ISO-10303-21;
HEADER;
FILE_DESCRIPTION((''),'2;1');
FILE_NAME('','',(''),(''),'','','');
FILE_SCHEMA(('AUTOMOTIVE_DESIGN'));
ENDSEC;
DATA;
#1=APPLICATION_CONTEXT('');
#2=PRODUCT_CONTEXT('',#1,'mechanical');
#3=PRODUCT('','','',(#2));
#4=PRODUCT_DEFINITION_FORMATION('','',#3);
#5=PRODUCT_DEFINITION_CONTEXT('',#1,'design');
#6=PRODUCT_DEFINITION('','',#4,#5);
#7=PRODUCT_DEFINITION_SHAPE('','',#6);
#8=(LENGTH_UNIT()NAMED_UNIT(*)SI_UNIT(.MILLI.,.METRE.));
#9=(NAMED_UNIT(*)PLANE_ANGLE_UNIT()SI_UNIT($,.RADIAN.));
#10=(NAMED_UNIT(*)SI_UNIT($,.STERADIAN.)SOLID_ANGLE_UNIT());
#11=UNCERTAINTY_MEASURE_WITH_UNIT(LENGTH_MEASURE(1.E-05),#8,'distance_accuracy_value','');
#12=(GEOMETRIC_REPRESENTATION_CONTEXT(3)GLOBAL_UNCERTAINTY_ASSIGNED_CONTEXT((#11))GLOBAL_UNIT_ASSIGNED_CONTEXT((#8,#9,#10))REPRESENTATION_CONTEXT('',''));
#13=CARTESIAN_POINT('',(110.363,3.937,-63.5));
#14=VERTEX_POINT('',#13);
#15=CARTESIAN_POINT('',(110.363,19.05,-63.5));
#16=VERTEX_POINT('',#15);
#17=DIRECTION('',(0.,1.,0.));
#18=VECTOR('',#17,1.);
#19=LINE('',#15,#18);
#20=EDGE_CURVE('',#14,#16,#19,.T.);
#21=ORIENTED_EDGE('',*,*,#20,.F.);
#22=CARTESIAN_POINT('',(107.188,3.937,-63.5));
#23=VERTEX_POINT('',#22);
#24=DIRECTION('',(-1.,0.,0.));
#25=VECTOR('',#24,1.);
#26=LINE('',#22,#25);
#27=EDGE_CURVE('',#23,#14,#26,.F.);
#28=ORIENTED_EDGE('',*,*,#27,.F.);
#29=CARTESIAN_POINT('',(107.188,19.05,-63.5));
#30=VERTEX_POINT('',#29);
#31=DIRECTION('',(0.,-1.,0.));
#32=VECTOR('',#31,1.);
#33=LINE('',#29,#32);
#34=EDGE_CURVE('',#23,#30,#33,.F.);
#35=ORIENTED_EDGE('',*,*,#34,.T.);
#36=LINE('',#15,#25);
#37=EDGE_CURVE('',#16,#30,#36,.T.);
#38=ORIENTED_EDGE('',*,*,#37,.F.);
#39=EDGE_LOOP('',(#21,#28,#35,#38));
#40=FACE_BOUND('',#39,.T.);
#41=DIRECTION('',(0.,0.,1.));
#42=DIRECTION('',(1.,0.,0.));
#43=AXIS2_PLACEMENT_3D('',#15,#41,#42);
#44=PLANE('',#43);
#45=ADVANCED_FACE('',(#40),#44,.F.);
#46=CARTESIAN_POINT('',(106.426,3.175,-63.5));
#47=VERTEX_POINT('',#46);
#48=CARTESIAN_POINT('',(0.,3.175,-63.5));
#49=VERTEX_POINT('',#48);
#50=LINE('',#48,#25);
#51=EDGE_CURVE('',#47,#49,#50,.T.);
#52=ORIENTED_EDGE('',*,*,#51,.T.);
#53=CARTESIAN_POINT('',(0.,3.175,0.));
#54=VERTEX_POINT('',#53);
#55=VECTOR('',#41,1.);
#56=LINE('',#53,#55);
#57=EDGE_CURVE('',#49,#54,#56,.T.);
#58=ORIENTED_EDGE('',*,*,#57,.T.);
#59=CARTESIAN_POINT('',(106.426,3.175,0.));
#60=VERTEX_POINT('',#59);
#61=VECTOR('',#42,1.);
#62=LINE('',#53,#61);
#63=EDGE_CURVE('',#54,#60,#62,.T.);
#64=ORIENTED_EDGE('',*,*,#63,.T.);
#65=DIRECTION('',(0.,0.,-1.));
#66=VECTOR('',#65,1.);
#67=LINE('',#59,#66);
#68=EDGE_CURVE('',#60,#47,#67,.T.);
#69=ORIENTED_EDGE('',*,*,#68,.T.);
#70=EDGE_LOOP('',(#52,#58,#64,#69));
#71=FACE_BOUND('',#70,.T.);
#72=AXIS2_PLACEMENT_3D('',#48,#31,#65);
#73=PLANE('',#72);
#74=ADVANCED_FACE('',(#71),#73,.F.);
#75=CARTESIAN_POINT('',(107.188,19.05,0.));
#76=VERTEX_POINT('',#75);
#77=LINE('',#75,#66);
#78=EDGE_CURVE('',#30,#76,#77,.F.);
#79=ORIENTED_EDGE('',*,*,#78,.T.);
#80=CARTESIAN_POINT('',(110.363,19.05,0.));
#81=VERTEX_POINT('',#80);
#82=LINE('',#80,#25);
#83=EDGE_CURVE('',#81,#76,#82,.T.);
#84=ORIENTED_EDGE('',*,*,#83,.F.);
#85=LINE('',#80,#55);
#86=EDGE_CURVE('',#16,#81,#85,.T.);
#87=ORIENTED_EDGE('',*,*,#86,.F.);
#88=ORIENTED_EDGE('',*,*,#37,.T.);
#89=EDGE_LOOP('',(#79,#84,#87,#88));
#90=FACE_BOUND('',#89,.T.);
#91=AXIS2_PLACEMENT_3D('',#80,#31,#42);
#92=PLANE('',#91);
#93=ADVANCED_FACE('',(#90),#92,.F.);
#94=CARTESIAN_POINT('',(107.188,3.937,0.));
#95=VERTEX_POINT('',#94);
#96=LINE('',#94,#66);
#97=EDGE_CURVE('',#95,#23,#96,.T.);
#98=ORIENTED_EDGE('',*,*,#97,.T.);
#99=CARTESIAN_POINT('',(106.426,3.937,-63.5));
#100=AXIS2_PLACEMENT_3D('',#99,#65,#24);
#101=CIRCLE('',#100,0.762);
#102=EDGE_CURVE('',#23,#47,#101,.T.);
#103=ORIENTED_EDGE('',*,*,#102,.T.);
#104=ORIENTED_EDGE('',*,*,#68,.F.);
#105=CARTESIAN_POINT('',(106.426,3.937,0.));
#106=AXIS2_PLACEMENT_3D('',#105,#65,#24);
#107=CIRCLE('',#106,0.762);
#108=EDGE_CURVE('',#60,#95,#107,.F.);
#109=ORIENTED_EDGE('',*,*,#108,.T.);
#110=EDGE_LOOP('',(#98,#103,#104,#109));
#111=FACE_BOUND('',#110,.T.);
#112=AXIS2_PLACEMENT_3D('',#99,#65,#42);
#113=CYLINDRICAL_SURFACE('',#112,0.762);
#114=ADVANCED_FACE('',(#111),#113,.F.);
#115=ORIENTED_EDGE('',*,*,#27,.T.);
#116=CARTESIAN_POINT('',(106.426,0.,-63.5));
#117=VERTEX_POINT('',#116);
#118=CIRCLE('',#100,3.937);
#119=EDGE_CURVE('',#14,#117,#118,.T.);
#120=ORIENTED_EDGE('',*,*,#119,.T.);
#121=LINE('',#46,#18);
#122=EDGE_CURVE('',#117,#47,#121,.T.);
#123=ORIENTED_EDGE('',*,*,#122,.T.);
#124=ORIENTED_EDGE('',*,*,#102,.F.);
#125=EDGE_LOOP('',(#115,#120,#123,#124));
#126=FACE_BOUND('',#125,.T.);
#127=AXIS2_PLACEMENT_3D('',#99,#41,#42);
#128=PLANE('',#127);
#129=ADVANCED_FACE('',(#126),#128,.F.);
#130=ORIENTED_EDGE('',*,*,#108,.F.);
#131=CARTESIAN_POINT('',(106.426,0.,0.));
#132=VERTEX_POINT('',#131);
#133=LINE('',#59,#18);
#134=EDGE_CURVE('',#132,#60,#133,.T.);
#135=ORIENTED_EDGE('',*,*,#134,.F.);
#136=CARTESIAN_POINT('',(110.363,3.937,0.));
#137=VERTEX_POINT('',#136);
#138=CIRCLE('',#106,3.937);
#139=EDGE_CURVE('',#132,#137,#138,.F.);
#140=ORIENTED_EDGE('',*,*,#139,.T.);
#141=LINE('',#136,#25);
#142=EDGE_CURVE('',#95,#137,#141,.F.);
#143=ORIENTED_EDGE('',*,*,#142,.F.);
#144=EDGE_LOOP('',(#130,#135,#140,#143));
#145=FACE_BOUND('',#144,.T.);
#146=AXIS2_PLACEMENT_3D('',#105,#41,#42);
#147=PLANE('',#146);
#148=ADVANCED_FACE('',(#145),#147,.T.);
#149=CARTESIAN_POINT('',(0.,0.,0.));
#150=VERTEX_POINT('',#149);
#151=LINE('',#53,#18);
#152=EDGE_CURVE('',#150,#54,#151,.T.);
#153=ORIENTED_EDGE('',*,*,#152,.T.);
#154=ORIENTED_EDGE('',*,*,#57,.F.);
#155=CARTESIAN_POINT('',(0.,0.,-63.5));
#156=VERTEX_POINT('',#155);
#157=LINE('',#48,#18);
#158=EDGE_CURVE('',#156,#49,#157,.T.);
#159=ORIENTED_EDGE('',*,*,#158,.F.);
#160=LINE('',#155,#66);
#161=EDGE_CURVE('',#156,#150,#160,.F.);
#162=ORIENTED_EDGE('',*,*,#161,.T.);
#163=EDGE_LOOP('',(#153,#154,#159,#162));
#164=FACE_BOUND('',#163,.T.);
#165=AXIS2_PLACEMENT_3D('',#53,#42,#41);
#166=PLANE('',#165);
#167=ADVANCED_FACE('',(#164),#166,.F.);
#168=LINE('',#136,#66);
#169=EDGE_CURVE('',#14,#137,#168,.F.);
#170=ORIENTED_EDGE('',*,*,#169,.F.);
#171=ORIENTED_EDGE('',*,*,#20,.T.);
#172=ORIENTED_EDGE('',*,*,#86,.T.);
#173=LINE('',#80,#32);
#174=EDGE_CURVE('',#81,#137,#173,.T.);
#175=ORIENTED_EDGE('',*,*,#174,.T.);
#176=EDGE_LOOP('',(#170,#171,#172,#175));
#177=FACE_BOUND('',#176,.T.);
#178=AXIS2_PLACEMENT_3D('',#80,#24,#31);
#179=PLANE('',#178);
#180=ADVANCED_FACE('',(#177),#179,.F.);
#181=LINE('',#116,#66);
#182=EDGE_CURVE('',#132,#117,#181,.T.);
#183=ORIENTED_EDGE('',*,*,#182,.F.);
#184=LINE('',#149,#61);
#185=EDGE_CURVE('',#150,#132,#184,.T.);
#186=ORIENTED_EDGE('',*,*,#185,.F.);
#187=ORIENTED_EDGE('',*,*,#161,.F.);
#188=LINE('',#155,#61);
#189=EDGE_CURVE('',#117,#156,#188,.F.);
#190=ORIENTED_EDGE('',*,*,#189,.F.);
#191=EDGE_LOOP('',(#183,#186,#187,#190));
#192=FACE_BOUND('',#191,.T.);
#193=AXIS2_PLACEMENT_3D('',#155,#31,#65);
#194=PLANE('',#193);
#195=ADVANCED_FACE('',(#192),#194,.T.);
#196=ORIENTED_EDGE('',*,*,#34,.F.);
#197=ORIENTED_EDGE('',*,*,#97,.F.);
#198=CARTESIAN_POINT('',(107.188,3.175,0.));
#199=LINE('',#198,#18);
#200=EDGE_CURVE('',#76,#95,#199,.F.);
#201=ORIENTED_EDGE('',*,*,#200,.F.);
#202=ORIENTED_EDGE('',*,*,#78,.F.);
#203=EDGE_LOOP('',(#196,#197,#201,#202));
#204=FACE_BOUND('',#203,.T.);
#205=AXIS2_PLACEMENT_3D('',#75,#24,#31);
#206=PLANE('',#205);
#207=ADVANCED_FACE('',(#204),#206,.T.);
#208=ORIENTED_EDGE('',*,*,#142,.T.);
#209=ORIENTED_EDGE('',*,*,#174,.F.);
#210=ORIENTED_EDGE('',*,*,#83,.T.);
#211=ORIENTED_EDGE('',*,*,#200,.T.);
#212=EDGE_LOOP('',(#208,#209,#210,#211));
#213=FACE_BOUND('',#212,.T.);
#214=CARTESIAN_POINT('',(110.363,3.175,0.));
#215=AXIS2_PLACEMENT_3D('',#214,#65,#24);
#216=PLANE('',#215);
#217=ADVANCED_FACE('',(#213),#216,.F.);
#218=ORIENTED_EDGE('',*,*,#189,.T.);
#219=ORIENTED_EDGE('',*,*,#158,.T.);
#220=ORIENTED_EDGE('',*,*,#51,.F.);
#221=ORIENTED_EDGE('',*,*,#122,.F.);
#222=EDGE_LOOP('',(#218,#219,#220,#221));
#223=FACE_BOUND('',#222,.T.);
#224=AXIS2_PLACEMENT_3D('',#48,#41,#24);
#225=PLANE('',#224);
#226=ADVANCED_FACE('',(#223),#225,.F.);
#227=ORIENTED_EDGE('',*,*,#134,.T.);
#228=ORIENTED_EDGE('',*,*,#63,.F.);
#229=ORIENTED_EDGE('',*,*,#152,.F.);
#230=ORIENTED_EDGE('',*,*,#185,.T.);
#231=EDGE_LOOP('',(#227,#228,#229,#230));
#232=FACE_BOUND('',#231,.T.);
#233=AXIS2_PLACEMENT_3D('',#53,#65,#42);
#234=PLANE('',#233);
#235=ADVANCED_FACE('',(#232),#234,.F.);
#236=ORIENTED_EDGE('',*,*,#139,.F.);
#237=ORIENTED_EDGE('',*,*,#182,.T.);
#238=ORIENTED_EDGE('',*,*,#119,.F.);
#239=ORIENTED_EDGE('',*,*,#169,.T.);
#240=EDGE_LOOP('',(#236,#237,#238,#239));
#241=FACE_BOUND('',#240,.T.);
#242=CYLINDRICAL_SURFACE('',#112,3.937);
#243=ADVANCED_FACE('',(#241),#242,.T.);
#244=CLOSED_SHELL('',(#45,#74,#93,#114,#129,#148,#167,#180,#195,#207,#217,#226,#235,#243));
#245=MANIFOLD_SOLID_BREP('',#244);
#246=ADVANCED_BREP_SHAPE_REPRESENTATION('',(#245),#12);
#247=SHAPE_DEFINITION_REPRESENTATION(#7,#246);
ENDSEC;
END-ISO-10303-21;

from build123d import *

# Parameters (mm, degrees)
SKETCH1_W           = 106.426
SKETCH1_H           = 63.5
BOSS_EXTRUDE1_DEPTH = 3.175
EDGE_FLANGE1_DEPTH  = 63.5


# Sheet-metal steps are written as plain solids
with BuildPart() as part:
    # Sketch1 → Boss-Extrude1 (new body)
    with BuildSketch(Plane(origin=(0, 0, 0), x_dir=(1, 0, 0), z_dir=(0, 1, 0))):
        with Locations((53.213, 31.75)):
            Rectangle(SKETCH1_W, SKETCH1_H)
    extrude(amount=BOSS_EXTRUDE1_DEPTH)

    # Edge-Flange1 section (across the edge) → Edge-Flange1 (add)
    with BuildSketch(Plane(origin=(107.188, 3.175, 0), x_dir=(-1, 0, 0), z_dir=(0, 0, -1))):
        with BuildLine():
            Line((-3.175, 0.762), (-3.175, 15.875))
            Line((-3.175, 15.875), (0, 15.875))
            Line((0, 15.875), (0, 0.762))
            ThreePointArc((0, 0.762), (0.223184633, 0.223184633), (0.762, 0))
            Line((0.762, 0), (0.762, -3.175))
            ThreePointArc((0.762, -3.175), (-2.021879398, -2.021879398), (-3.175, 0.762))
        make_face()
    extrude(amount=EDGE_FLANGE1_DEPTH)


solid = part.part
